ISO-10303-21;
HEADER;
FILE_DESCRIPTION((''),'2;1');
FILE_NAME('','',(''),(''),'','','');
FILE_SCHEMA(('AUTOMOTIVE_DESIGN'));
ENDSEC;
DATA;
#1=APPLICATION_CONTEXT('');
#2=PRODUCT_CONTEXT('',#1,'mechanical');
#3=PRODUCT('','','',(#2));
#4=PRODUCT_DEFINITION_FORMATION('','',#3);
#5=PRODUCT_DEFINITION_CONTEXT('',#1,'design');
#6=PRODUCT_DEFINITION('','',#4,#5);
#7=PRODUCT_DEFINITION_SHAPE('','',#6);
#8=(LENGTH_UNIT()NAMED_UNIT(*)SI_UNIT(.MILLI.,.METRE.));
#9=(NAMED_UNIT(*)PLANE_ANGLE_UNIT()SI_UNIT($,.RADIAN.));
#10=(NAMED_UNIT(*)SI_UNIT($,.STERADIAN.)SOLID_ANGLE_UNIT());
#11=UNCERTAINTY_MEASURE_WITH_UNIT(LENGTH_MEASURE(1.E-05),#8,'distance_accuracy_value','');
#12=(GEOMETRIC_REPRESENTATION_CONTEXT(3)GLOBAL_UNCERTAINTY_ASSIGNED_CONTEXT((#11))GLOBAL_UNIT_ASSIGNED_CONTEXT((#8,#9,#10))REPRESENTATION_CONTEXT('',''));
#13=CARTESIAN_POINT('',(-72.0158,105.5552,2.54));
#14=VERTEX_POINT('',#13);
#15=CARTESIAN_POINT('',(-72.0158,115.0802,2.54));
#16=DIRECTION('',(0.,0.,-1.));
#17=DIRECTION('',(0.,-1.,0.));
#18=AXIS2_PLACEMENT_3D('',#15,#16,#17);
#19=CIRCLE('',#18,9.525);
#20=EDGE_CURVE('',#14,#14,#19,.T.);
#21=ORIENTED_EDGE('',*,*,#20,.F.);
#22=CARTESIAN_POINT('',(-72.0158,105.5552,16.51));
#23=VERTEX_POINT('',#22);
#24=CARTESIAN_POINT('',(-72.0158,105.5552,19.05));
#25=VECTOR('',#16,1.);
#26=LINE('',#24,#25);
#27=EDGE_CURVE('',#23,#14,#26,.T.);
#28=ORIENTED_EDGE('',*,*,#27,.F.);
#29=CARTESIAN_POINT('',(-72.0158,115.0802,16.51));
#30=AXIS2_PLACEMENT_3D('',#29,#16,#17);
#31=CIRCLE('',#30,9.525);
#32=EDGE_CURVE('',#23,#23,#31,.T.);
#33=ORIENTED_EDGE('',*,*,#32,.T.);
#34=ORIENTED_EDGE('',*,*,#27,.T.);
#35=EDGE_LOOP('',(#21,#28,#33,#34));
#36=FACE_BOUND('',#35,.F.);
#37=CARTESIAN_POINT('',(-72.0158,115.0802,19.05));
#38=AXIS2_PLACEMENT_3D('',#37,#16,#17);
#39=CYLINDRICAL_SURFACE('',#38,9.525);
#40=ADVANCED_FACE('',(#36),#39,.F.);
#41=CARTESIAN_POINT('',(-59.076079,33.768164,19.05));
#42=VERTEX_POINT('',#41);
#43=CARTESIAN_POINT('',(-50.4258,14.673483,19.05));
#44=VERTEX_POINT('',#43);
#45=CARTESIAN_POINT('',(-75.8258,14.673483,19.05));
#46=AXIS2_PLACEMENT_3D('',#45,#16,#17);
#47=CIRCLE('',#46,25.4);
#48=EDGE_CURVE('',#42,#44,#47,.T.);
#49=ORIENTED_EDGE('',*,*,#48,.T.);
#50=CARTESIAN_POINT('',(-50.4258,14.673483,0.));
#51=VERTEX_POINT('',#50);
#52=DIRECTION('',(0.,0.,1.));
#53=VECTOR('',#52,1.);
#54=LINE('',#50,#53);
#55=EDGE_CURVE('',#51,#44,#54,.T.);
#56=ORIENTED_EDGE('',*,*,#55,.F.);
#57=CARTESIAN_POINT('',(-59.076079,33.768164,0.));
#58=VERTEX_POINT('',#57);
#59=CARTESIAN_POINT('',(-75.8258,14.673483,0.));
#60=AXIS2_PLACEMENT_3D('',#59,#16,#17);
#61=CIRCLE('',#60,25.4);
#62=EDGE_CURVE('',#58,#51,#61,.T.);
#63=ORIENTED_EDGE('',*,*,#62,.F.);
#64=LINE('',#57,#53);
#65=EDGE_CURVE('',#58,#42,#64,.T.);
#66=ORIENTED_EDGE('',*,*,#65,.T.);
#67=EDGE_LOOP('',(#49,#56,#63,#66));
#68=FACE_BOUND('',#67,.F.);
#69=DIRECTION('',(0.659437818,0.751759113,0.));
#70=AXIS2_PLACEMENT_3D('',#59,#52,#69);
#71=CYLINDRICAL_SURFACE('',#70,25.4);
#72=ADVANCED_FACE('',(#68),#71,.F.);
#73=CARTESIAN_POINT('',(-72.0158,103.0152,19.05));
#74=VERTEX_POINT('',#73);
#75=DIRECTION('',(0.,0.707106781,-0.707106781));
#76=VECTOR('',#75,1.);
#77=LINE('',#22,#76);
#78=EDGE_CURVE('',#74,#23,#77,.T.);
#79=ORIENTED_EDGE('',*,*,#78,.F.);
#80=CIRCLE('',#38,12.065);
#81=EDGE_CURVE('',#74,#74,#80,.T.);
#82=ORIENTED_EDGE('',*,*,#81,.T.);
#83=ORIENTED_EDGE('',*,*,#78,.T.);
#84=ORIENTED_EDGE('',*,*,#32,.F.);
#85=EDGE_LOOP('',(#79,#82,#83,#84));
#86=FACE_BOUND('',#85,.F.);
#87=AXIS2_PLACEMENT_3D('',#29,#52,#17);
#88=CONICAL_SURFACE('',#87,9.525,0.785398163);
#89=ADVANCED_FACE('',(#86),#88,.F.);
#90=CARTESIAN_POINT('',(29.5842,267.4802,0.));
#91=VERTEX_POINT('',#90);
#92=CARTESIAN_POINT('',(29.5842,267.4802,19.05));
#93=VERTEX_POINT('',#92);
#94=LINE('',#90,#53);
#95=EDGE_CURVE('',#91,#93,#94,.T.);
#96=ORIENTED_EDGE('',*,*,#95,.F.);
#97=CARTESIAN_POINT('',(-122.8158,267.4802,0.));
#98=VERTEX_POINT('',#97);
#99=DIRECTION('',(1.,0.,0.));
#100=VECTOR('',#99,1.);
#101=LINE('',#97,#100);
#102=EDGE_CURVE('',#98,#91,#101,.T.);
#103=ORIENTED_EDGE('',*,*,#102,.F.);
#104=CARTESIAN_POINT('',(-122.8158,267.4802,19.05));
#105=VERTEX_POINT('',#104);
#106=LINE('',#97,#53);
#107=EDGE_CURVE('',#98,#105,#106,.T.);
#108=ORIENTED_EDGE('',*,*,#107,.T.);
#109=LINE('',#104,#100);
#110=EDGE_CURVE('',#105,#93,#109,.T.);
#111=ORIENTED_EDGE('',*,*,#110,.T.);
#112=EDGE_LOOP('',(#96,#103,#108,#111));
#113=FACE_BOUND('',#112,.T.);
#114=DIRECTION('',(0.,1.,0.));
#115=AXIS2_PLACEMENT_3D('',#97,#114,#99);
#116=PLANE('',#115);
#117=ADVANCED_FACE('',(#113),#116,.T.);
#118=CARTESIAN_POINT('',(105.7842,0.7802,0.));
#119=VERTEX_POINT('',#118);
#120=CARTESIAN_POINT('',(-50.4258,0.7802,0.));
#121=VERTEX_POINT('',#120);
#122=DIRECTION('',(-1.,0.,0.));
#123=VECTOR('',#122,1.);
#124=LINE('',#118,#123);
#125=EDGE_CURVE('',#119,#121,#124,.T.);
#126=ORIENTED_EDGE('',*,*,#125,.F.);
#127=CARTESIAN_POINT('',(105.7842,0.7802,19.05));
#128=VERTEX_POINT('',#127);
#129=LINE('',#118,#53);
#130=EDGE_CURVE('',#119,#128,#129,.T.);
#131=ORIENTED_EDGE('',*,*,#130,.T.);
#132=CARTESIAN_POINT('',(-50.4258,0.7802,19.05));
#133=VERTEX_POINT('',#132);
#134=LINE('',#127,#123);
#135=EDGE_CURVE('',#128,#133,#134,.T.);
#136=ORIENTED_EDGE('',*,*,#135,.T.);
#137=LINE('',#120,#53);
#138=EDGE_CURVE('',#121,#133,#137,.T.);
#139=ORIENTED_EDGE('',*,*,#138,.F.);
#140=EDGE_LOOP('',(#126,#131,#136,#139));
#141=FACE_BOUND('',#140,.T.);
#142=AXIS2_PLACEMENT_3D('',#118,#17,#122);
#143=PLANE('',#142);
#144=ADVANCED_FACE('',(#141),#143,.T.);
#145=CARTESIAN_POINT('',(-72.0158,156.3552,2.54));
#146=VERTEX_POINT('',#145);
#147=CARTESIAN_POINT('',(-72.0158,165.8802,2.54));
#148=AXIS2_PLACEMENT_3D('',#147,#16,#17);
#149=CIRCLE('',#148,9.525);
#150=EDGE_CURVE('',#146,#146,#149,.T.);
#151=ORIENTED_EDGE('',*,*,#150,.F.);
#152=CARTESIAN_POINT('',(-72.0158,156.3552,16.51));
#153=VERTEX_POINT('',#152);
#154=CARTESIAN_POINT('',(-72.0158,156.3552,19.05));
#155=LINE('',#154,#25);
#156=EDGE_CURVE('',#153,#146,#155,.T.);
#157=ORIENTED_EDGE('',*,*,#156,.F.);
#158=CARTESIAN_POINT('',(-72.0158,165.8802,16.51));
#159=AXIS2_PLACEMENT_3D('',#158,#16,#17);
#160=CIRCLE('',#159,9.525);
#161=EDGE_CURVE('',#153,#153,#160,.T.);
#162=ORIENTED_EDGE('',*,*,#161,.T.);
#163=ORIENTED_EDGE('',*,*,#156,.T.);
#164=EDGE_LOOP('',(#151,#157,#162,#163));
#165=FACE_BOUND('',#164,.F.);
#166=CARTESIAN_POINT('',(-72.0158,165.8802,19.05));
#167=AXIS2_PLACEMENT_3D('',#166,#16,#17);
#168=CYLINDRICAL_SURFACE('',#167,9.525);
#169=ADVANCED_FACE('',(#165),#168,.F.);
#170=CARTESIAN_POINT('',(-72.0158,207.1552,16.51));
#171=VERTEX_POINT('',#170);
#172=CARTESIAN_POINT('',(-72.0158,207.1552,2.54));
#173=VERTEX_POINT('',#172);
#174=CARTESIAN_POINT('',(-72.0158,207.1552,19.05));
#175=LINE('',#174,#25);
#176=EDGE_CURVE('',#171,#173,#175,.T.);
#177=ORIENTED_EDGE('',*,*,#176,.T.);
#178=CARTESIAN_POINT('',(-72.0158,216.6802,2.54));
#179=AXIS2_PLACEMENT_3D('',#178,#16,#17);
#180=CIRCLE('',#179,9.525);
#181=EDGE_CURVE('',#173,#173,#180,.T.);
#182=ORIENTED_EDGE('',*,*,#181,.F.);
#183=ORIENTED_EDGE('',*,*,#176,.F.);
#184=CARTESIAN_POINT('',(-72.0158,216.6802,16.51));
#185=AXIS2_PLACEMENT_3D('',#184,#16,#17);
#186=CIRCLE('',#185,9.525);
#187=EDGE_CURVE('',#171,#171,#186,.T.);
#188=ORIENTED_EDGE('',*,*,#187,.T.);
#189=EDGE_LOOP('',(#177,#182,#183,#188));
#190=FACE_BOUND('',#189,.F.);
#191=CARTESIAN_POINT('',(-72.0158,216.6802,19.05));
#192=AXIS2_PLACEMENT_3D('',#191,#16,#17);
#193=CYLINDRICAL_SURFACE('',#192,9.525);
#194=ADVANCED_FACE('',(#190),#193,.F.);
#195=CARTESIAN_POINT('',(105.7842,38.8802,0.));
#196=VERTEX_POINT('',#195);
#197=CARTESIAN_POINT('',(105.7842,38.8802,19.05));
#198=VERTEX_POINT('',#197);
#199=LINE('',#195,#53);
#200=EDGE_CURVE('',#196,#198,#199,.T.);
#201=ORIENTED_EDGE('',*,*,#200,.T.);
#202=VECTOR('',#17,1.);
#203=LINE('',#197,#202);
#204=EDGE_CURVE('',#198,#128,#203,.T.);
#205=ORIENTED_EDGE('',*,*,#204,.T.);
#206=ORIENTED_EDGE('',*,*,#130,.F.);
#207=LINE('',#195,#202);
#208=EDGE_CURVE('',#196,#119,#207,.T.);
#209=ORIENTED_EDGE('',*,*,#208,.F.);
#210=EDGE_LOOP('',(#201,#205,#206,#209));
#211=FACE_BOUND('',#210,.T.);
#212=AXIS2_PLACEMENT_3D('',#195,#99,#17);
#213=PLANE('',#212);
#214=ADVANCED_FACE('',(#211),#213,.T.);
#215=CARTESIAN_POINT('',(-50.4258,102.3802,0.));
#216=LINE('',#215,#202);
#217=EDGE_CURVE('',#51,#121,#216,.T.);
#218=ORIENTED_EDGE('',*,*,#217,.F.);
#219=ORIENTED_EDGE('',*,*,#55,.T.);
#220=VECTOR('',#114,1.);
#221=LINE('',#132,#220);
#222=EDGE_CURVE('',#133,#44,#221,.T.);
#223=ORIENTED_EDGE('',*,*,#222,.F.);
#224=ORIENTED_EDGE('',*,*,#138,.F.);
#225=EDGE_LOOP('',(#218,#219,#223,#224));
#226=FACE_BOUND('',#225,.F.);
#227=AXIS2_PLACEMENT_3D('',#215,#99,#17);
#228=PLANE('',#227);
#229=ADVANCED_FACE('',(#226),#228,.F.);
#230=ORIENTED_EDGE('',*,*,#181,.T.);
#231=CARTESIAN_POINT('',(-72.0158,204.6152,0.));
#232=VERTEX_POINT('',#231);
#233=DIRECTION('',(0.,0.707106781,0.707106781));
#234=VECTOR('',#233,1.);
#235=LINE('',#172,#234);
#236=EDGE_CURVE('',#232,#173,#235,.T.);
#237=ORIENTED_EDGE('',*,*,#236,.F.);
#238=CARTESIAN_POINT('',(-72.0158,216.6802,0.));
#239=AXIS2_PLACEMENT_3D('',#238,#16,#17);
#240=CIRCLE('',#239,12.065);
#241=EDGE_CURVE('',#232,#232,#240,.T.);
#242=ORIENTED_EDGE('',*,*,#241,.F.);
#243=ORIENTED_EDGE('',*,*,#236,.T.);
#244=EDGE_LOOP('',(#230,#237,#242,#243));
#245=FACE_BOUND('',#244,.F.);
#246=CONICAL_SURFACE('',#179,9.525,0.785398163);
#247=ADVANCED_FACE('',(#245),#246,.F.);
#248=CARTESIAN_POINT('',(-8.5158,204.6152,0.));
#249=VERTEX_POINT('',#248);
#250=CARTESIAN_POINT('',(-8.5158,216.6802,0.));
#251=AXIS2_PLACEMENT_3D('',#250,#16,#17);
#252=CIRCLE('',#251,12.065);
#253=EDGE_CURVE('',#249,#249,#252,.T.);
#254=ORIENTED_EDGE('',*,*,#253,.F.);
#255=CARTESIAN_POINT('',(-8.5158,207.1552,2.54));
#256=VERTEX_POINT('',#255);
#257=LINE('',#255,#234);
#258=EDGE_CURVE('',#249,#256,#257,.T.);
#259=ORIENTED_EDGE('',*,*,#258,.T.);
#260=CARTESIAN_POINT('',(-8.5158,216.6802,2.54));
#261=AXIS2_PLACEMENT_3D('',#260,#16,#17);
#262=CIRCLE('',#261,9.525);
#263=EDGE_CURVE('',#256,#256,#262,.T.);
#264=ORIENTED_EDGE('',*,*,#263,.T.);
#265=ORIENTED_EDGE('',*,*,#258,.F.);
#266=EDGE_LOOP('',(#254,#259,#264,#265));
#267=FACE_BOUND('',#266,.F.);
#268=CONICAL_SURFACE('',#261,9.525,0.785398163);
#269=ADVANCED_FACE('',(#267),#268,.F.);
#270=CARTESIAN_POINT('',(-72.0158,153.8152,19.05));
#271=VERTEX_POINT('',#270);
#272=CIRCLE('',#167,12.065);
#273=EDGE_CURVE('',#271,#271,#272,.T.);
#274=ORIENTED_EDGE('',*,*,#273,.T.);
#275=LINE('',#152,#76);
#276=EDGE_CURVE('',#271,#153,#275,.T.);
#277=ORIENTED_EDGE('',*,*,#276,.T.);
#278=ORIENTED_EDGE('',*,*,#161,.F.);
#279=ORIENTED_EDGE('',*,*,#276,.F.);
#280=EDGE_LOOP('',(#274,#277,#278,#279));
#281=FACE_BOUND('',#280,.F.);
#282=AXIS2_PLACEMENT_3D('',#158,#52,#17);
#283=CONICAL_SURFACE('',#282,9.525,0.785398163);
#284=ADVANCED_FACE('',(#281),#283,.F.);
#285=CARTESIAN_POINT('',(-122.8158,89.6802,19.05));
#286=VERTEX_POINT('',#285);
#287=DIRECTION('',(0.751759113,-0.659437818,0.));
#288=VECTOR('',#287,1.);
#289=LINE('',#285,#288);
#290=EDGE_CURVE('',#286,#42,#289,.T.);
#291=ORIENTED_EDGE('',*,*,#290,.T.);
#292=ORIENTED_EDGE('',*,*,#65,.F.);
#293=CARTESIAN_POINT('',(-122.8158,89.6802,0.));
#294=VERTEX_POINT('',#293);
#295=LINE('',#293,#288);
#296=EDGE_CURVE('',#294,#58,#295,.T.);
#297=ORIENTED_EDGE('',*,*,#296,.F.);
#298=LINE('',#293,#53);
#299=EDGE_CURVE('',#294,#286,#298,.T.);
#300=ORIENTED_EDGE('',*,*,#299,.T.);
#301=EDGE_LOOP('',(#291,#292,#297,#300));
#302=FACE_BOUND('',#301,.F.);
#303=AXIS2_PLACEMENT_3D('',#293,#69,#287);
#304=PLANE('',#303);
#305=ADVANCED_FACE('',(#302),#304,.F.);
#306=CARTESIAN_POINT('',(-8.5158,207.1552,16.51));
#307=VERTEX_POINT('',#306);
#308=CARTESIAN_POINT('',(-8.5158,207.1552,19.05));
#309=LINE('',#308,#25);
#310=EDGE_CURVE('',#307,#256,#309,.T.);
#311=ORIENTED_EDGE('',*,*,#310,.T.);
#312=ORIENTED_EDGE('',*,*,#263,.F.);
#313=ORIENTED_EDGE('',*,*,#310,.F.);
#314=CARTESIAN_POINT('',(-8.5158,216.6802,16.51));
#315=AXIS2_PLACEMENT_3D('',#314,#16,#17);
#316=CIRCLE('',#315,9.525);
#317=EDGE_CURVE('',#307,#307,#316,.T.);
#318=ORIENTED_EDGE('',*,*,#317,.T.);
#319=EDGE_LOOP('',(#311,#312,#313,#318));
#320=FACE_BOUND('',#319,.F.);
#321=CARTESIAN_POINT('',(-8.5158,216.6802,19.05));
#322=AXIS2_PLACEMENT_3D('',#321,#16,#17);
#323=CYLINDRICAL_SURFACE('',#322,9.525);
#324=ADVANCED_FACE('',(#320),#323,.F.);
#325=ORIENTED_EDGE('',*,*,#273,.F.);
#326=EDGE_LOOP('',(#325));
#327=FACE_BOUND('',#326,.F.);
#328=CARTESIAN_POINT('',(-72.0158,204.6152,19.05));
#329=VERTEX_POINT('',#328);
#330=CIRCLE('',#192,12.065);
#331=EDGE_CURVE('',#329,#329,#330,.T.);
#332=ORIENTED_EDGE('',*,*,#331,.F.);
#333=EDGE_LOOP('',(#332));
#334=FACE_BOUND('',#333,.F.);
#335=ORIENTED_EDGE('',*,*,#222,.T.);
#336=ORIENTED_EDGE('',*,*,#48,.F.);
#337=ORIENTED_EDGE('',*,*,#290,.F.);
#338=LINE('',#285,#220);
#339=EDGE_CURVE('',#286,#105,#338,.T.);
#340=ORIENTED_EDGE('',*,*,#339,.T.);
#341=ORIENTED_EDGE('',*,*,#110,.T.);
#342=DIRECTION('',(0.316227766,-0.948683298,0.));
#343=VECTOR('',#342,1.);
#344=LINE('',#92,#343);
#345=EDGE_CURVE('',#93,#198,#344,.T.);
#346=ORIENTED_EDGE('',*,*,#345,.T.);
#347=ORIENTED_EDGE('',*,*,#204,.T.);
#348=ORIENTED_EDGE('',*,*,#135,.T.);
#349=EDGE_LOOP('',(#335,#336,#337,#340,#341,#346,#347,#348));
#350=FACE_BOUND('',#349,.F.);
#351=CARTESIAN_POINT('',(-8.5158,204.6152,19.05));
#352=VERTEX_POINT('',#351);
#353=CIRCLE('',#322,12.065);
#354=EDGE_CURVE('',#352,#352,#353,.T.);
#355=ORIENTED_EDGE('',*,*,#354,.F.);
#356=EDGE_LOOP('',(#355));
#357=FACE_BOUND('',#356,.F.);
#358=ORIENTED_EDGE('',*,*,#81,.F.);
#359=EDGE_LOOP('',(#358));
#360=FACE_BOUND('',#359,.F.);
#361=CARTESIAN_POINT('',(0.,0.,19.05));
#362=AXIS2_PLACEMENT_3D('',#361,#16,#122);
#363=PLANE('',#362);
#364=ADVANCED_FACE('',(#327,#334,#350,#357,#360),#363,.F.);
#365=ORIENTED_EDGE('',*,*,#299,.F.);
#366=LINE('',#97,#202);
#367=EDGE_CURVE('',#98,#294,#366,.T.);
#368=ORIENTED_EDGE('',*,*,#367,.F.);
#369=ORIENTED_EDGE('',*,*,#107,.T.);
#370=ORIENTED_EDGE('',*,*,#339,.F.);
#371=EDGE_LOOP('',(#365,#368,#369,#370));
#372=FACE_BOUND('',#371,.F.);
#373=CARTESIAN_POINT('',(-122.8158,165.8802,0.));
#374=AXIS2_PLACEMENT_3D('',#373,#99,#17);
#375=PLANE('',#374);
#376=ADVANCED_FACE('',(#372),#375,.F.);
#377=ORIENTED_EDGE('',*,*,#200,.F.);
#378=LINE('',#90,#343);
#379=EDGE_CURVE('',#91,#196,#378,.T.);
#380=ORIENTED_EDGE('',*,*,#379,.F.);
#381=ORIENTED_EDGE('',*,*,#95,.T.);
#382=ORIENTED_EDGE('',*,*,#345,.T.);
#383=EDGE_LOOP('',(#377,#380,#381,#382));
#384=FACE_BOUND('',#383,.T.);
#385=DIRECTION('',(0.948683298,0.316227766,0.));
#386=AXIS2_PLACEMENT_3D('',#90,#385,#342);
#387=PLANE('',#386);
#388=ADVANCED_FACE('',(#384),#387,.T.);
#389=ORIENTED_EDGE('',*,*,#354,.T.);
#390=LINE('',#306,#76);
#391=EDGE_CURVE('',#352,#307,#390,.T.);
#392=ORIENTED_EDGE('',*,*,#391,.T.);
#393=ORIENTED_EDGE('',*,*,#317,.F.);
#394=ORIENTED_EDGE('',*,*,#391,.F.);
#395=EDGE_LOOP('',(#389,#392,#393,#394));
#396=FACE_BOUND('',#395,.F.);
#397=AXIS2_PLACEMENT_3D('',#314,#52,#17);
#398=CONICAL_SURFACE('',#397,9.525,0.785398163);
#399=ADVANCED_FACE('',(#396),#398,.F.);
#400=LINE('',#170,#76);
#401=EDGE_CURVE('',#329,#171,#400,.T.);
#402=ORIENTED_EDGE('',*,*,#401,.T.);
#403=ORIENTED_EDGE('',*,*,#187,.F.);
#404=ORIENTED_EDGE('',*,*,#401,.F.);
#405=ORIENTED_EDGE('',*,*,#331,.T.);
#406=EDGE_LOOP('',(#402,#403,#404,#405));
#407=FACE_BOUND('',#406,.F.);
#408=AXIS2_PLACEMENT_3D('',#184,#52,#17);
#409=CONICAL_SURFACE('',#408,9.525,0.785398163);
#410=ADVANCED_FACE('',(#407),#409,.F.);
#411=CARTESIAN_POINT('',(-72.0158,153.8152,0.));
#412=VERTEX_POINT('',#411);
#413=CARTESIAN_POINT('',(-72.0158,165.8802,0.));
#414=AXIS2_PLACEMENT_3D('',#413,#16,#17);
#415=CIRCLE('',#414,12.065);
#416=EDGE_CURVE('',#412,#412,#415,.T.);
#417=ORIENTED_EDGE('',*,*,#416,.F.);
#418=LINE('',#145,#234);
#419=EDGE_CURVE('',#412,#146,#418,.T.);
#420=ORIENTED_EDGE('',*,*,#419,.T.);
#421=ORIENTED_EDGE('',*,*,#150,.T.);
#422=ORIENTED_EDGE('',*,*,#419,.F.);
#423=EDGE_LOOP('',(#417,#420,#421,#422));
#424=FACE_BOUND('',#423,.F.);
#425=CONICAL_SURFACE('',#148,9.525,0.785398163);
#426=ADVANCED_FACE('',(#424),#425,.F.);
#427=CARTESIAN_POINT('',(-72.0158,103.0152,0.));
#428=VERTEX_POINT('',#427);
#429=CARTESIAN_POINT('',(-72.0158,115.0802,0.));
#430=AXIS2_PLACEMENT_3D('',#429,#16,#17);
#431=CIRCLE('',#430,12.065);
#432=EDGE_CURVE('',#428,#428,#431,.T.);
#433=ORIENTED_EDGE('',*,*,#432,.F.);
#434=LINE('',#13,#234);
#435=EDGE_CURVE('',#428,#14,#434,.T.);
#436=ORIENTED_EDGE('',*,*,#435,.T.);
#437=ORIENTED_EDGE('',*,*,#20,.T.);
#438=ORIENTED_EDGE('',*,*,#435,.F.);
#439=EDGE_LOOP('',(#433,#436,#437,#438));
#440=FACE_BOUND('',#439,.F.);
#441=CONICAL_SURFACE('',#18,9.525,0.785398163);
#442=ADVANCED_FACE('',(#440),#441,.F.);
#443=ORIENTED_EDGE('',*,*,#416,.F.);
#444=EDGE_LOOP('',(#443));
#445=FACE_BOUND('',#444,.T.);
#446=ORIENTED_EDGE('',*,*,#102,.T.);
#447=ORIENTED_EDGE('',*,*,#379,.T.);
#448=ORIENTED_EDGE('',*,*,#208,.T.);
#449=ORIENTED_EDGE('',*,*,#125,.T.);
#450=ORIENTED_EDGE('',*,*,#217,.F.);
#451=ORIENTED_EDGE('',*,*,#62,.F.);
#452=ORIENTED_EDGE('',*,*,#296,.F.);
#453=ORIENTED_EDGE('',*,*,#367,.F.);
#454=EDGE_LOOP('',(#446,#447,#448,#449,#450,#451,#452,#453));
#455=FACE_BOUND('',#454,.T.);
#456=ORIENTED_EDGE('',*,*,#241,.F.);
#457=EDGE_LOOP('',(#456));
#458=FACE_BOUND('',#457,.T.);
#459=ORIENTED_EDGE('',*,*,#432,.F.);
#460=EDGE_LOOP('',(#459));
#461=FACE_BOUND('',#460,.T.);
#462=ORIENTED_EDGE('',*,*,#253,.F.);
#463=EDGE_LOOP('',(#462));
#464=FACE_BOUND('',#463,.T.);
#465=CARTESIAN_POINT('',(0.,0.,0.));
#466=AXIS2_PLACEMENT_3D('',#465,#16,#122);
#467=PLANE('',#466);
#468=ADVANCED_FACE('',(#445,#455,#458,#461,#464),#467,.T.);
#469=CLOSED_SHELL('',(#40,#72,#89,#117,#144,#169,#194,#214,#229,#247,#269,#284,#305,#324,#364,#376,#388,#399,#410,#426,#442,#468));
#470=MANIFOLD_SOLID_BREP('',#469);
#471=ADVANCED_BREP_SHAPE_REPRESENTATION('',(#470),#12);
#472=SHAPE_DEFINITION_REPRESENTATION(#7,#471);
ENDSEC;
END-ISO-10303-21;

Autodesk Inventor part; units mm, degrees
ref_plane "YZ Plane" through (0, 0, 0) normal (1, 0, 0) x (0, 1, 0)
ref_plane "XZ Plane" through (0, 0, 0) normal (0, 1, 0) x (-1, 0, 0)
ref_plane "XY Plane" through (0, 0, 0) normal (0, 0, 1) x (1, 0, 0)
sketch "Sketch1" plane through (0, 0, 0) normal (0, 0, 1) x (1, 0, 0)
  line L0 (-50.4258, 38.8802) -> (105.7842, 38.8802)
  line L1 (105.7842, 38.8802) -> (105.7842, 0.7802)
  line L2 (105.7842, 0.7802) -> (-50.4258, 0.7802)
  line L3 (-50.4258, 0.7802) -> (-50.4258, 38.8802)
  line L4 (-122.8158, 267.4802) -> (29.5842, 267.4802)
  line L5 (29.5842, 267.4802) -> (29.5842, 165.8802)
  line L6 (29.5842, 165.8802) -> (-122.8158, 165.8802)
  line L7 (-122.8158, 165.8802) -> (-122.8158, 267.4802)
  line L8 (29.5842, 267.4802) -> (105.7842, 38.8802)
  line L9 (-122.8158, 165.8802) -> (-50.4258, 102.3802)
  line L10 (-50.4258, 102.3802) -> (-50.4258, 38.8802)
  point P0 (0, 0)
  dimension "d0" = 156.21
  dimension "d1" = 38.1
  dimension "d2" = 101.6
  dimension "d3" = 152.4
  dimension "d4" = 228.6
  dimension "d5" = 76.2
  dimension "d19" = 63.5
extrude "Extrusion1" add sketch "Sketch1" along normal blind 19.05
sketch "Sketch5" plane through (0, 0, 0) normal (0, 0, -1) x (-1, 0, 0)
  line L0 (50.4258, 102.3802) -> (50.4258, 0.7802) projected
  line L1 (122.8158, 165.8802) -> (50.4258, 102.3802) projected
  line L2 (122.8158, 165.8802) -> (122.8158, 89.6802)
  line L3 (122.8158, 89.6802) -> (50.4258, 26.1802)
  point P0 (0, 0)
  dimension "d40" = 76.2
  dimension "d41" = 76.2
extrude "Extrusion3" add sketch "Sketch5" against normal blind 19.05
sketch "Sketch6" plane through (0, 0, 19.05) normal (0, 0, 1) x (1, 0, 0)
  line L0 (-122.8158, 267.4802) -> (29.5842, 267.4802) projected
  line L1 (-122.8158, 89.6802) -> (-122.8158, 267.4802) projected
  point P0 (0, 0)
  point P1 (-72.0158, 216.6802)
  point P2 (-8.5158, 216.6802)
  point P3 (-72.0158, 115.0802)
  point P4 (-72.0158, 165.8802)
  dimension "d44" = 50.8
  dimension "d45" = 50.8
  dimension "d46" = 50.8
  dimension "d47" = 50.8
  dimension "d48" = 50.8
  dimension "d49" = 50.8
  dimension "d50" = 50.8
  dimension "d51" = 63.5
hole "Hole3" at (-72.0158, 216.6802, 19.05) at (-8.5158, 216.6802, 19.05) at (-72.0158, 115.0802, 19.05) at (-72.0158, 165.8802, 19.05) direction (0, 0, -1) diameter 19.05 end through all
fillet "Fillet1" radius 25.4 1 edges at (-50.4258, 26.1802, 9.525)
chamfer "Chamfer1" distance 2.54 angle 45 8 edges at (-8.5158, 226.2052, 0) (-72.0158, 226.2052, 0) (-72.0158, 175.4052, 0) (-72.0158, 124.6052, 0) (-72.0158, 226.2052, 19.05) (-8.5158, 226.2052, 19.05) (-72.0158, 175.4052, 19.05) (-72.0158, 124.6052, 19.05)
equation "\"d45\" = d44"
equation "\"d46\" = d44"
equation "\"d47\" = d44"
equation "\"d48\" = d44"
properties part number "Uprights"
